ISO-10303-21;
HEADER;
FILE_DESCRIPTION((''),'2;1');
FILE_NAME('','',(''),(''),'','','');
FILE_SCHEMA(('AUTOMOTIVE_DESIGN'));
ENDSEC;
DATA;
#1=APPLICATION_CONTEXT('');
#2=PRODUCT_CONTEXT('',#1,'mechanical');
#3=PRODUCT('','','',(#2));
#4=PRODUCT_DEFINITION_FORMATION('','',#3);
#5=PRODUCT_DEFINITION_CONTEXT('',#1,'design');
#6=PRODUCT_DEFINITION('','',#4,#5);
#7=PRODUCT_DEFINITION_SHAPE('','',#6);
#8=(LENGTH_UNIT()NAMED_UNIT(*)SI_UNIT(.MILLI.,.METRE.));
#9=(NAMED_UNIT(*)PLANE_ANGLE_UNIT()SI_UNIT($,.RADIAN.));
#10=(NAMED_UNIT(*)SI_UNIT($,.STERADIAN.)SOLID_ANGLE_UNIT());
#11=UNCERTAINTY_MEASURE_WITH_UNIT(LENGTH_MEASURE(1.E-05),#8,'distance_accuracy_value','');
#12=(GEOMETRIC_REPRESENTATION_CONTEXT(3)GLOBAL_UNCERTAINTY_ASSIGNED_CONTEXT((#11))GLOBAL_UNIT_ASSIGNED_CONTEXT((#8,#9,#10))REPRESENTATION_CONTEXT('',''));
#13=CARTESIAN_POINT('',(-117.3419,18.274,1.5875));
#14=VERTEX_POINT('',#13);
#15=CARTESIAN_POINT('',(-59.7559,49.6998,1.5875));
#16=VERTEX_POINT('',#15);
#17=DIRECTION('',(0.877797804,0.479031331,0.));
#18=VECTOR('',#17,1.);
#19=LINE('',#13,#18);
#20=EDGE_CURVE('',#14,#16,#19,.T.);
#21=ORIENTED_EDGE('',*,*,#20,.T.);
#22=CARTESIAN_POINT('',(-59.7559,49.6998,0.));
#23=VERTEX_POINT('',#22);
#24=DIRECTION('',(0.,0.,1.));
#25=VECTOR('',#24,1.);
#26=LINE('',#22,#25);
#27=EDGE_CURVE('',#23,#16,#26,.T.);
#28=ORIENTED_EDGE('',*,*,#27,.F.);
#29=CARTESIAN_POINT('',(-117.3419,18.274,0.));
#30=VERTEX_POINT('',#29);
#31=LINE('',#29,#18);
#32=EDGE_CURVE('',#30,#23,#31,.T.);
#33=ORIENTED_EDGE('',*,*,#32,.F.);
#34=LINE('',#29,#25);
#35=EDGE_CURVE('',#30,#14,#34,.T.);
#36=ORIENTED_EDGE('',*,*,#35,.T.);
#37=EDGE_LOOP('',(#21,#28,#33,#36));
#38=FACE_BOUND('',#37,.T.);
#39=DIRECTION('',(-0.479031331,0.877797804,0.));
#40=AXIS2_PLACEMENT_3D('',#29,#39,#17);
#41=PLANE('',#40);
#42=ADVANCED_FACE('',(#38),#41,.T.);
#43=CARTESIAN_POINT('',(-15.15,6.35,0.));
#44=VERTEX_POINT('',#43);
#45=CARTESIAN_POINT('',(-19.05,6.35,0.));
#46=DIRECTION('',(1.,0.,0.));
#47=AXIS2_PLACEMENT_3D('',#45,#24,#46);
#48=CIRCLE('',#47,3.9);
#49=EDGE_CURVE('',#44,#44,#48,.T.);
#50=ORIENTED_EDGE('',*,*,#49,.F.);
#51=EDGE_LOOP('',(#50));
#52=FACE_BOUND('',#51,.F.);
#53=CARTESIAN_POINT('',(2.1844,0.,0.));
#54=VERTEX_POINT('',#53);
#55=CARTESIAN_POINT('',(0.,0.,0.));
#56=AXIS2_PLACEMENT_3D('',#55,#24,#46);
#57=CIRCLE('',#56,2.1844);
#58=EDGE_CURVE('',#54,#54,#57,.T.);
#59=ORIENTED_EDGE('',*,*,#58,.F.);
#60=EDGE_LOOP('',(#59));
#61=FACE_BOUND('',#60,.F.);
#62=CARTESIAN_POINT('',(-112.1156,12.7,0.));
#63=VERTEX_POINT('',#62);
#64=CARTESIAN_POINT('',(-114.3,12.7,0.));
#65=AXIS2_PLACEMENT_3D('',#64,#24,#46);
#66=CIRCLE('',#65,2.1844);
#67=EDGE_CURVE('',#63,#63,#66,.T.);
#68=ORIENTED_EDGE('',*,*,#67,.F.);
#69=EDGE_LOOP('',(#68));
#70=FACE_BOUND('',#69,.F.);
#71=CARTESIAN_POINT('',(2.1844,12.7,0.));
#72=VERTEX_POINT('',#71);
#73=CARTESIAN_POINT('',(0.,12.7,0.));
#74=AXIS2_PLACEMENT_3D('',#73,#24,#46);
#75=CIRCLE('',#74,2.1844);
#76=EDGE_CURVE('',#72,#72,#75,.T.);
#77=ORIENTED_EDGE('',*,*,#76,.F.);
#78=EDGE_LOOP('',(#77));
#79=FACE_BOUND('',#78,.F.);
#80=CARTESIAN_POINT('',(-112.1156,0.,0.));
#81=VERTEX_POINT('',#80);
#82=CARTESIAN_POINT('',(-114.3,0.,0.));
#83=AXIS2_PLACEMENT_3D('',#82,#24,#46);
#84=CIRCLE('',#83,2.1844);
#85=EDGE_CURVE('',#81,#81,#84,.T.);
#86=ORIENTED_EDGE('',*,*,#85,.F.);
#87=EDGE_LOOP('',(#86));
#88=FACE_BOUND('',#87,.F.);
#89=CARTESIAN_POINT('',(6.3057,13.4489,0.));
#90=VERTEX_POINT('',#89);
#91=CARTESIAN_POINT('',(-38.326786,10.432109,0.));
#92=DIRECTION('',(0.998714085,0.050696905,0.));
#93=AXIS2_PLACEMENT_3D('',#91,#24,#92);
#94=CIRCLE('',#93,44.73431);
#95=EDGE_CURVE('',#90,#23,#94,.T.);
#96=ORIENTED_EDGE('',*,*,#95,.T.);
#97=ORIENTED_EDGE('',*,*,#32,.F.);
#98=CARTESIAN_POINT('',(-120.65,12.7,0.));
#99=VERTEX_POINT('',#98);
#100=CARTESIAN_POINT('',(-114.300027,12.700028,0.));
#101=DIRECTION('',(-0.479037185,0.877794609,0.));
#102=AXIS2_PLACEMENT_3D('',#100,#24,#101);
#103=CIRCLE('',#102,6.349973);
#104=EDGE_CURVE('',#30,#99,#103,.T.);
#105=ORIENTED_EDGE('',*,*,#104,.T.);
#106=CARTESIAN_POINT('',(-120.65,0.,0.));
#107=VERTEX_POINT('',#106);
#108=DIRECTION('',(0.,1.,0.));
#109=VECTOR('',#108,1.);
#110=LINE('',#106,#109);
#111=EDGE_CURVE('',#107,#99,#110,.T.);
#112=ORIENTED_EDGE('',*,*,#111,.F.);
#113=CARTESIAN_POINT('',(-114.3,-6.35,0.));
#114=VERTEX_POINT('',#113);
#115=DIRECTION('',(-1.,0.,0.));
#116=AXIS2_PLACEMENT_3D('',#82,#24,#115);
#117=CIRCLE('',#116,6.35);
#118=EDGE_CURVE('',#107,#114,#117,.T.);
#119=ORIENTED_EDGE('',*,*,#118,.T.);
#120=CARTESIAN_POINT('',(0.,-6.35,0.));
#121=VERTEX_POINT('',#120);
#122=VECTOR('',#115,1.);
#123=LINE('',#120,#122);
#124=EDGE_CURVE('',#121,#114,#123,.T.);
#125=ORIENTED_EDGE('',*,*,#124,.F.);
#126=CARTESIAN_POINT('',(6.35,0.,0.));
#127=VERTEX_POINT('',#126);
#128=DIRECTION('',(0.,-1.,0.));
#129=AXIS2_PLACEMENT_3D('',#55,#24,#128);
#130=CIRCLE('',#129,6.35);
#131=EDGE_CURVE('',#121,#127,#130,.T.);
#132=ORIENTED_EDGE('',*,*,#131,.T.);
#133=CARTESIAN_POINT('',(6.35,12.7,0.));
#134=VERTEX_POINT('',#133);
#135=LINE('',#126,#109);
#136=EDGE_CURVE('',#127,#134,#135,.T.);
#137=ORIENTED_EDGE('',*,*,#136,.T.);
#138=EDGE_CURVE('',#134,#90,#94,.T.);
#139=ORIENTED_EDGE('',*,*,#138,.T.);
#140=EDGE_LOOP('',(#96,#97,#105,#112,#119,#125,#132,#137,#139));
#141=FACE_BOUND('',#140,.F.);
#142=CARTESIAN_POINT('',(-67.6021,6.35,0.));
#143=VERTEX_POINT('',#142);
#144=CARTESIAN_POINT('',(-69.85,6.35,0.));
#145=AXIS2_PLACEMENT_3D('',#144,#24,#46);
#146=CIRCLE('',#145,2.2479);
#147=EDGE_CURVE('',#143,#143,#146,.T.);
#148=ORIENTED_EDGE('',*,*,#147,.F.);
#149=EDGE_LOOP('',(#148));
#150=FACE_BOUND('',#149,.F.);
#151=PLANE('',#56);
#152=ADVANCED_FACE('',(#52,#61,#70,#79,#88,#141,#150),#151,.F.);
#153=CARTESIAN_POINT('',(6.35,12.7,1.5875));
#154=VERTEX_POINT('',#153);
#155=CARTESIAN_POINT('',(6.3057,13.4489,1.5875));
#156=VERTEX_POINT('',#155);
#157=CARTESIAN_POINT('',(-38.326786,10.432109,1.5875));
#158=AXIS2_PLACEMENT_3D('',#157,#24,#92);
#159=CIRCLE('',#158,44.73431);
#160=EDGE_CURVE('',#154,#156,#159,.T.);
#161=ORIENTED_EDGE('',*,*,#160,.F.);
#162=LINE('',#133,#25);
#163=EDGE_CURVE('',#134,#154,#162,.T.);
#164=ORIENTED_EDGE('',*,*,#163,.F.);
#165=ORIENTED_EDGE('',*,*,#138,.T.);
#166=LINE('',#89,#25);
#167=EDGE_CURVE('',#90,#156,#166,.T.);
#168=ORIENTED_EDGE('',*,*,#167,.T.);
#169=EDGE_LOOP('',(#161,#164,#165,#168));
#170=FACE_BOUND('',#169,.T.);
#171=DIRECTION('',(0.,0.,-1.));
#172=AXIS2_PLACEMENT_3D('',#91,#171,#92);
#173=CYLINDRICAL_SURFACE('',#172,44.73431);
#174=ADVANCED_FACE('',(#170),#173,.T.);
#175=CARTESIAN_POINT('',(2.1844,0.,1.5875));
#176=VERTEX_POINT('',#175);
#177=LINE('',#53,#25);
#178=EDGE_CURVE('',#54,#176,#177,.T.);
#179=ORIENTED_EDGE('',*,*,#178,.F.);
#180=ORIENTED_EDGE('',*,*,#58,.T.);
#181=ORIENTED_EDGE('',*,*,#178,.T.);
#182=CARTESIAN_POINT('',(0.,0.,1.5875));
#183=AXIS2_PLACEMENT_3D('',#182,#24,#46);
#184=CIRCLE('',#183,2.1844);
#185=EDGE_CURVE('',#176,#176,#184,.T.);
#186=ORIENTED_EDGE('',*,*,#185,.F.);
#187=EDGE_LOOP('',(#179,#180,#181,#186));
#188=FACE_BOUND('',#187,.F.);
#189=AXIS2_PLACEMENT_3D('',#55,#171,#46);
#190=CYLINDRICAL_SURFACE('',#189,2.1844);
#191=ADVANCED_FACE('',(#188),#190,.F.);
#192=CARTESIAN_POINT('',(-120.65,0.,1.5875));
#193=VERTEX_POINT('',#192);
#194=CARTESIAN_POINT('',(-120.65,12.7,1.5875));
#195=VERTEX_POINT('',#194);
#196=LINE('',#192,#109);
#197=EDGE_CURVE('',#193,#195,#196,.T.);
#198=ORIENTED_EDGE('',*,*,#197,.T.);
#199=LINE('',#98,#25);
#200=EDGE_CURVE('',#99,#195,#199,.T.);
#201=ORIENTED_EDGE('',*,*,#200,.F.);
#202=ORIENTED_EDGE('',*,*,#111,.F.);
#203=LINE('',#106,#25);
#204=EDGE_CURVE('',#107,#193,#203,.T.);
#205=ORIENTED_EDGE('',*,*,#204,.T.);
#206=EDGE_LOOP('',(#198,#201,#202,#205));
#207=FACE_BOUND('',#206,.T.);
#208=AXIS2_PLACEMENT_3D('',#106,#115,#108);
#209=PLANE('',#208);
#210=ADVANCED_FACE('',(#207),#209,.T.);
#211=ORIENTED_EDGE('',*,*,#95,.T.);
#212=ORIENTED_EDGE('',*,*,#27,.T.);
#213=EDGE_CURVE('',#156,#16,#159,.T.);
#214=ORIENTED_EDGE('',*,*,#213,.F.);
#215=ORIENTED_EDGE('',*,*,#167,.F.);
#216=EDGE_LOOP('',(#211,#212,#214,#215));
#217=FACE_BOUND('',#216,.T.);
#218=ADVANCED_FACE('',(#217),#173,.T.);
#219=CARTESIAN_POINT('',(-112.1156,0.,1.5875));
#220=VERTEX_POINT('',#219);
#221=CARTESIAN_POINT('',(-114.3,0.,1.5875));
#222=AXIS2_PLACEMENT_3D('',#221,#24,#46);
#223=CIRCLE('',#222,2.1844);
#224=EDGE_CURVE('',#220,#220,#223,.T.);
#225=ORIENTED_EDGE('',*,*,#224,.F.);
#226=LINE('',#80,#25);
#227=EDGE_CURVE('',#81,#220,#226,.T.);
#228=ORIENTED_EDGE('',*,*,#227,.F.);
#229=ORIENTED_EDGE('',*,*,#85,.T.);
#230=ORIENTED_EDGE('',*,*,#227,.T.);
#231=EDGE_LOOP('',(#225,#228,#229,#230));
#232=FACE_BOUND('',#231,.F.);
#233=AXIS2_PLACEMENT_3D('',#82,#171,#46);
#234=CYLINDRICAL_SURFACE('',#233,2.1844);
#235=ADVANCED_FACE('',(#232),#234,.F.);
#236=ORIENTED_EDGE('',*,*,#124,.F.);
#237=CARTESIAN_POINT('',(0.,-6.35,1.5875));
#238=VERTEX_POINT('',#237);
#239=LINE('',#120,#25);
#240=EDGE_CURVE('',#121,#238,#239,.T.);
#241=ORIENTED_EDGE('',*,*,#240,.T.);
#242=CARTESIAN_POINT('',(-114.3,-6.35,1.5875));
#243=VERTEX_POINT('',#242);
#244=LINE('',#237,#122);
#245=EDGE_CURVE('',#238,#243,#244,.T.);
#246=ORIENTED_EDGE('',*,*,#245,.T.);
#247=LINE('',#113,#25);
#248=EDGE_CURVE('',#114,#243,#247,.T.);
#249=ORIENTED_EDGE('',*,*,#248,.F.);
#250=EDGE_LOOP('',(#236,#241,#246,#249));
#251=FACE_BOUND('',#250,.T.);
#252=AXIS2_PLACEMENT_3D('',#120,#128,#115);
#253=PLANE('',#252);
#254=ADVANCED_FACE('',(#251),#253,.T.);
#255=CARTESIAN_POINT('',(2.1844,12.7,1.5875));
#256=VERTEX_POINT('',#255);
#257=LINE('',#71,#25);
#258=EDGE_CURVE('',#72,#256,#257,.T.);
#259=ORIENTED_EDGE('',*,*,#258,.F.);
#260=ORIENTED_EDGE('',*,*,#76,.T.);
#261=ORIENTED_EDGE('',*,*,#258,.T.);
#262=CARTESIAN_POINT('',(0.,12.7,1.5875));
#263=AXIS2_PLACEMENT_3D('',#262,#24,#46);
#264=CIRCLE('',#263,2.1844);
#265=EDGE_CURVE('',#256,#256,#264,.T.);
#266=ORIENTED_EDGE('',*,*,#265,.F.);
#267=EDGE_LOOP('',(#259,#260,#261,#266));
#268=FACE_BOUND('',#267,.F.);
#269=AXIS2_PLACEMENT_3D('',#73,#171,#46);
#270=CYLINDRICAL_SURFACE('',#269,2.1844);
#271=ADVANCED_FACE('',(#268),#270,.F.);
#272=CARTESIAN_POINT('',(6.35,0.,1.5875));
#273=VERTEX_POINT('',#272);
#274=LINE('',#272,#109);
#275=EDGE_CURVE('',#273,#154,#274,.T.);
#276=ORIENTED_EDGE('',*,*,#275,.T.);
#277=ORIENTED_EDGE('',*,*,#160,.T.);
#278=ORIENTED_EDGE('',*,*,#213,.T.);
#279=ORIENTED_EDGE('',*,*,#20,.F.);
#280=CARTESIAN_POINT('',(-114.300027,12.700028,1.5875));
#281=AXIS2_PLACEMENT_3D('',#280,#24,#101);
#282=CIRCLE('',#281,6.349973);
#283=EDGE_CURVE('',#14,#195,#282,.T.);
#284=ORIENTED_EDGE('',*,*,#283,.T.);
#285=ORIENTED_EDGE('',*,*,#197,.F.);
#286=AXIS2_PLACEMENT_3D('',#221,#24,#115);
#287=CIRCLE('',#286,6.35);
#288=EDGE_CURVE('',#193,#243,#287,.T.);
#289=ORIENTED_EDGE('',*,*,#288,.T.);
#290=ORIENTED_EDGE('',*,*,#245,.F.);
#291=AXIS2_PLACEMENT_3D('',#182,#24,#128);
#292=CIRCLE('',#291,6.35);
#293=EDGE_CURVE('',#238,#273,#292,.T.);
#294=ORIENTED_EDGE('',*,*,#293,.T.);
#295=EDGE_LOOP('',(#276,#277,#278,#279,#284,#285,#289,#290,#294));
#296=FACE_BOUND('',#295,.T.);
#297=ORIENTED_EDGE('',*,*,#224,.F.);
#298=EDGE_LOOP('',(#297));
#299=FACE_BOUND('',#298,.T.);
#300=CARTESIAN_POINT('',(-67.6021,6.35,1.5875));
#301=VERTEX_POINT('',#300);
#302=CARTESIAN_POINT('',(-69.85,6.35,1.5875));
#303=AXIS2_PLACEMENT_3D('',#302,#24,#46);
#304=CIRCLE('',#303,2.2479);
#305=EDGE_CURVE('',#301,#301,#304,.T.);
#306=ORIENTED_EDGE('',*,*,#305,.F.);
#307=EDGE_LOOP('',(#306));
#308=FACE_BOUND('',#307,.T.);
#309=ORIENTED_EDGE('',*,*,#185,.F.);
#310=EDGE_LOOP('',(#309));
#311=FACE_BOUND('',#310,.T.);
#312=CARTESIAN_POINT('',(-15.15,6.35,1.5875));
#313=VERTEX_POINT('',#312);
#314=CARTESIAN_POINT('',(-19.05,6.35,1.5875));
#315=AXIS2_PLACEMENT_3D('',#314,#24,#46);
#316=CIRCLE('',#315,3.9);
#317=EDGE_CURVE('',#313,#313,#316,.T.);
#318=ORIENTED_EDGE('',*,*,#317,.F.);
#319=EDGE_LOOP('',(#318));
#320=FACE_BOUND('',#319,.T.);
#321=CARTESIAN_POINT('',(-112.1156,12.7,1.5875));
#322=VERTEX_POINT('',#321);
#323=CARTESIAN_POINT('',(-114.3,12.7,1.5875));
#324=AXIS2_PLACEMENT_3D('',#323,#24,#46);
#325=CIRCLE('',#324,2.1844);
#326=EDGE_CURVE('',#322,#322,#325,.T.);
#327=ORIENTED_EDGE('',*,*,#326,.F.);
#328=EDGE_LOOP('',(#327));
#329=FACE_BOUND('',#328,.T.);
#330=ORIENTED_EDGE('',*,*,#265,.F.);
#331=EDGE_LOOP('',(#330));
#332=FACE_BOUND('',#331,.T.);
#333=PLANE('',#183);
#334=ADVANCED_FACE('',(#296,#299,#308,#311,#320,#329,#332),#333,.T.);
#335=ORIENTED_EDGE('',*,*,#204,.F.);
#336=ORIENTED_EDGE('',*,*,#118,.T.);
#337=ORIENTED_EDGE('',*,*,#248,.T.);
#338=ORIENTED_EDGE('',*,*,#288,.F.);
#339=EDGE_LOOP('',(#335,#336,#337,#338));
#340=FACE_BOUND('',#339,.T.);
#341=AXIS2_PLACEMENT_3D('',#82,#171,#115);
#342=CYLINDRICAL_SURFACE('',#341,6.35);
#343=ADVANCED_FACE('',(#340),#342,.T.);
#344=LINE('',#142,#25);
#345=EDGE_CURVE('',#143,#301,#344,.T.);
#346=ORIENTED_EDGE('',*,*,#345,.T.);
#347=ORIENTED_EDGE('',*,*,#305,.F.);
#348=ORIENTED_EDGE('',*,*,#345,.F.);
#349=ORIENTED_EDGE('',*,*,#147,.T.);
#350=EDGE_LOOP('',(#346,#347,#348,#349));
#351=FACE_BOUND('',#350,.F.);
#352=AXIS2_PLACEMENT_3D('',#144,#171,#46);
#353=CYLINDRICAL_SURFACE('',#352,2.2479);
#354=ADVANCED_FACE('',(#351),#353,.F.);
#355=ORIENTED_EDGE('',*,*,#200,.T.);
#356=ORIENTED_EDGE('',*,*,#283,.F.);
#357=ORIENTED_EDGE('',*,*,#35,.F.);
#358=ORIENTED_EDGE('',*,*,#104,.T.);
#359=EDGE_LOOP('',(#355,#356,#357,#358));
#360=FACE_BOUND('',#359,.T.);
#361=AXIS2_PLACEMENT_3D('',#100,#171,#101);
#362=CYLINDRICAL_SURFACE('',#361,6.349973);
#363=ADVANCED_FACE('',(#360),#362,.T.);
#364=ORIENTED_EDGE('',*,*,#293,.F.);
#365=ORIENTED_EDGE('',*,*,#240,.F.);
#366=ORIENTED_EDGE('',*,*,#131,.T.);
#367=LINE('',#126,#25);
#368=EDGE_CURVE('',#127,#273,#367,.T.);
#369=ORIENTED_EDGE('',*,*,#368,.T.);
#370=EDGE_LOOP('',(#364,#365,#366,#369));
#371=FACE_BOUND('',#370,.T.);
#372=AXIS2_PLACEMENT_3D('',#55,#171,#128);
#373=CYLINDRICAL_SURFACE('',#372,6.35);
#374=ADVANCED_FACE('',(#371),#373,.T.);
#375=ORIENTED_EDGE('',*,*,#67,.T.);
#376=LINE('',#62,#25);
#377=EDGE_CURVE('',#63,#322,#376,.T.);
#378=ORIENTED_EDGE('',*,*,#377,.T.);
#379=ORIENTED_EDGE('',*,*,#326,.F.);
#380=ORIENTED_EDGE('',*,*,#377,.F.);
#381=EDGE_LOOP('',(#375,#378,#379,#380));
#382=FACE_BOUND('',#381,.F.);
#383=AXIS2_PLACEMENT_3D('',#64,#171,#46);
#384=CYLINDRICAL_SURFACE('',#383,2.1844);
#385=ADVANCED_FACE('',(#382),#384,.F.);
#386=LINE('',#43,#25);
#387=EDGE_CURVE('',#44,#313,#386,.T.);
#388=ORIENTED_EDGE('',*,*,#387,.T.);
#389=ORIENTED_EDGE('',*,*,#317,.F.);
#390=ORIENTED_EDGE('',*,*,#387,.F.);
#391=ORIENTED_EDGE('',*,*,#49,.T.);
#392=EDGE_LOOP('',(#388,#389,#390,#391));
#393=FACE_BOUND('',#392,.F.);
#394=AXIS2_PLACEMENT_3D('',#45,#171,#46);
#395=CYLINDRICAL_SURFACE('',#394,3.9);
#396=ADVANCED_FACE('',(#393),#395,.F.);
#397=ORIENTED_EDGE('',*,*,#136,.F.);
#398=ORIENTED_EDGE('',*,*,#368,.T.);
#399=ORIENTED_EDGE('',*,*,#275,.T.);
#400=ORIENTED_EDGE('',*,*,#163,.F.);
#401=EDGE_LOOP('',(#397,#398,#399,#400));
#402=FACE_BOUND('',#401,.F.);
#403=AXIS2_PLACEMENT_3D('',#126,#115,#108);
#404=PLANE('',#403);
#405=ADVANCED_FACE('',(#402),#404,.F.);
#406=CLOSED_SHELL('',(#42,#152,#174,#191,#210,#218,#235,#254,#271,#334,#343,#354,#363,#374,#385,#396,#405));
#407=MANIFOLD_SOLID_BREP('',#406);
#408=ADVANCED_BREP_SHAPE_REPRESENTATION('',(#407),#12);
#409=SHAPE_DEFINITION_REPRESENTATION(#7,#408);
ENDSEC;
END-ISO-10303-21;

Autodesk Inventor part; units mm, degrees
ref_plane "YZ Plane" through (0, 0, 0) normal (1, 0, 0) x (0, 1, 0)
ref_plane "XZ Plane" through (0, 0, 0) normal (0, 1, 0) x (-1, 0, 0)
ref_plane "XY Plane" through (0, 0, 0) normal (0, 0, 1) x (1, 0, 0)
sketch "main" plane through (0, 0, 0) normal (0, 0, 1) x (1, 0, 0)
  circle A0 centre (50.5981, -28.4488) radius 2.1844
  line L0 (-66.7437, -10.1747) -> (-9.1578, 21.251)
  line L1 (50.5981, -34.7988) -> (-63.7019, -34.7988)
  circle A1 centre (50.5981, -15.7488) radius 2.1844
  arc A2 (50.5981, -34.7988) -> (56.9481, -28.4488) centre (50.5981, -28.4488) ccw
  line L2 (56.9481, -28.4488) -> (56.9481, -15.7488)
  arc A3 (56.9481, -15.7488) -> (56.9038, -14.9999) centre (50.5981, -15.7488) ccw
  arc A4 (56.9481, -15.7488) -> (-9.1578, 21.251) centre (12.2713, -18.0166) ccw
  circle A5 centre (31.5481, -22.0988) radius 3.9
  circle A6 centre (-19.2519, -22.0988) radius 2.2479
  circle A7 centre (-63.7019, -28.4488) radius 2.1844
  circle A8 centre (-63.7019, -15.7488) radius 2.1844
  arc A9 (-66.7437, -10.1747) -> (-70.0519, -15.7488) centre (-63.7019, -15.7488) ccw
  line L3 (-70.0519, -28.4488) -> (-70.0519, -15.7488)
  arc A10 (-70.0519, -28.4488) -> (-63.7019, -34.7988) centre (-63.7019, -28.4488) ccw
  point P0 (-3.3794, -19.3684)
  dimension "d0" = 7.8
  dimension "d1" = 4.4958
sketch "Sketch1" plane through (0, 0, 0) normal (0, 0, 1) x (1, 0, 0)
  circle A0 centre (0, 0) radius 2.1844
  line L0 (-117.3419, 18.274) -> (-59.7559, 49.6998)
  line L1 (0, -6.35) -> (-114.3, -6.35)
  circle A1 centre (0, 12.7) radius 2.1844
  arc A2 (0, -6.35) -> (6.35, 0) centre (0, 0) ccw
  line L2 (6.35, 0) -> (6.35, 12.7)
  arc A3 (6.35, 12.7) -> (6.3057, 13.4489) centre (0, 12.7) ccw
  arc A4 (6.35, 12.7) -> (-59.7559, 49.6998) centre (-38.3268, 10.4321) ccw
  circle A5 centre (-19.05, 6.35) radius 3.9
  circle A6 centre (-69.85, 6.35) radius 2.2479
  circle A7 centre (-114.3, 0) radius 2.1844
  circle A8 centre (-114.3, 12.7) radius 2.1844
  arc A9 (-117.3419, 18.274) -> (-120.65, 12.7) centre (-114.3, 12.7) ccw
  line L3 (-120.65, 0) -> (-120.65, 12.7)
  arc A10 (-120.65, 0) -> (-114.3, -6.35) centre (-114.3, 0) ccw
extrude "Extrusion1" add sketch "Sketch1" along normal blind 1.5875 contours L0 A4 L2 A2 L1 A10 L3 A9
properties part number "intake_sled" material "Acetal Resin, White"
